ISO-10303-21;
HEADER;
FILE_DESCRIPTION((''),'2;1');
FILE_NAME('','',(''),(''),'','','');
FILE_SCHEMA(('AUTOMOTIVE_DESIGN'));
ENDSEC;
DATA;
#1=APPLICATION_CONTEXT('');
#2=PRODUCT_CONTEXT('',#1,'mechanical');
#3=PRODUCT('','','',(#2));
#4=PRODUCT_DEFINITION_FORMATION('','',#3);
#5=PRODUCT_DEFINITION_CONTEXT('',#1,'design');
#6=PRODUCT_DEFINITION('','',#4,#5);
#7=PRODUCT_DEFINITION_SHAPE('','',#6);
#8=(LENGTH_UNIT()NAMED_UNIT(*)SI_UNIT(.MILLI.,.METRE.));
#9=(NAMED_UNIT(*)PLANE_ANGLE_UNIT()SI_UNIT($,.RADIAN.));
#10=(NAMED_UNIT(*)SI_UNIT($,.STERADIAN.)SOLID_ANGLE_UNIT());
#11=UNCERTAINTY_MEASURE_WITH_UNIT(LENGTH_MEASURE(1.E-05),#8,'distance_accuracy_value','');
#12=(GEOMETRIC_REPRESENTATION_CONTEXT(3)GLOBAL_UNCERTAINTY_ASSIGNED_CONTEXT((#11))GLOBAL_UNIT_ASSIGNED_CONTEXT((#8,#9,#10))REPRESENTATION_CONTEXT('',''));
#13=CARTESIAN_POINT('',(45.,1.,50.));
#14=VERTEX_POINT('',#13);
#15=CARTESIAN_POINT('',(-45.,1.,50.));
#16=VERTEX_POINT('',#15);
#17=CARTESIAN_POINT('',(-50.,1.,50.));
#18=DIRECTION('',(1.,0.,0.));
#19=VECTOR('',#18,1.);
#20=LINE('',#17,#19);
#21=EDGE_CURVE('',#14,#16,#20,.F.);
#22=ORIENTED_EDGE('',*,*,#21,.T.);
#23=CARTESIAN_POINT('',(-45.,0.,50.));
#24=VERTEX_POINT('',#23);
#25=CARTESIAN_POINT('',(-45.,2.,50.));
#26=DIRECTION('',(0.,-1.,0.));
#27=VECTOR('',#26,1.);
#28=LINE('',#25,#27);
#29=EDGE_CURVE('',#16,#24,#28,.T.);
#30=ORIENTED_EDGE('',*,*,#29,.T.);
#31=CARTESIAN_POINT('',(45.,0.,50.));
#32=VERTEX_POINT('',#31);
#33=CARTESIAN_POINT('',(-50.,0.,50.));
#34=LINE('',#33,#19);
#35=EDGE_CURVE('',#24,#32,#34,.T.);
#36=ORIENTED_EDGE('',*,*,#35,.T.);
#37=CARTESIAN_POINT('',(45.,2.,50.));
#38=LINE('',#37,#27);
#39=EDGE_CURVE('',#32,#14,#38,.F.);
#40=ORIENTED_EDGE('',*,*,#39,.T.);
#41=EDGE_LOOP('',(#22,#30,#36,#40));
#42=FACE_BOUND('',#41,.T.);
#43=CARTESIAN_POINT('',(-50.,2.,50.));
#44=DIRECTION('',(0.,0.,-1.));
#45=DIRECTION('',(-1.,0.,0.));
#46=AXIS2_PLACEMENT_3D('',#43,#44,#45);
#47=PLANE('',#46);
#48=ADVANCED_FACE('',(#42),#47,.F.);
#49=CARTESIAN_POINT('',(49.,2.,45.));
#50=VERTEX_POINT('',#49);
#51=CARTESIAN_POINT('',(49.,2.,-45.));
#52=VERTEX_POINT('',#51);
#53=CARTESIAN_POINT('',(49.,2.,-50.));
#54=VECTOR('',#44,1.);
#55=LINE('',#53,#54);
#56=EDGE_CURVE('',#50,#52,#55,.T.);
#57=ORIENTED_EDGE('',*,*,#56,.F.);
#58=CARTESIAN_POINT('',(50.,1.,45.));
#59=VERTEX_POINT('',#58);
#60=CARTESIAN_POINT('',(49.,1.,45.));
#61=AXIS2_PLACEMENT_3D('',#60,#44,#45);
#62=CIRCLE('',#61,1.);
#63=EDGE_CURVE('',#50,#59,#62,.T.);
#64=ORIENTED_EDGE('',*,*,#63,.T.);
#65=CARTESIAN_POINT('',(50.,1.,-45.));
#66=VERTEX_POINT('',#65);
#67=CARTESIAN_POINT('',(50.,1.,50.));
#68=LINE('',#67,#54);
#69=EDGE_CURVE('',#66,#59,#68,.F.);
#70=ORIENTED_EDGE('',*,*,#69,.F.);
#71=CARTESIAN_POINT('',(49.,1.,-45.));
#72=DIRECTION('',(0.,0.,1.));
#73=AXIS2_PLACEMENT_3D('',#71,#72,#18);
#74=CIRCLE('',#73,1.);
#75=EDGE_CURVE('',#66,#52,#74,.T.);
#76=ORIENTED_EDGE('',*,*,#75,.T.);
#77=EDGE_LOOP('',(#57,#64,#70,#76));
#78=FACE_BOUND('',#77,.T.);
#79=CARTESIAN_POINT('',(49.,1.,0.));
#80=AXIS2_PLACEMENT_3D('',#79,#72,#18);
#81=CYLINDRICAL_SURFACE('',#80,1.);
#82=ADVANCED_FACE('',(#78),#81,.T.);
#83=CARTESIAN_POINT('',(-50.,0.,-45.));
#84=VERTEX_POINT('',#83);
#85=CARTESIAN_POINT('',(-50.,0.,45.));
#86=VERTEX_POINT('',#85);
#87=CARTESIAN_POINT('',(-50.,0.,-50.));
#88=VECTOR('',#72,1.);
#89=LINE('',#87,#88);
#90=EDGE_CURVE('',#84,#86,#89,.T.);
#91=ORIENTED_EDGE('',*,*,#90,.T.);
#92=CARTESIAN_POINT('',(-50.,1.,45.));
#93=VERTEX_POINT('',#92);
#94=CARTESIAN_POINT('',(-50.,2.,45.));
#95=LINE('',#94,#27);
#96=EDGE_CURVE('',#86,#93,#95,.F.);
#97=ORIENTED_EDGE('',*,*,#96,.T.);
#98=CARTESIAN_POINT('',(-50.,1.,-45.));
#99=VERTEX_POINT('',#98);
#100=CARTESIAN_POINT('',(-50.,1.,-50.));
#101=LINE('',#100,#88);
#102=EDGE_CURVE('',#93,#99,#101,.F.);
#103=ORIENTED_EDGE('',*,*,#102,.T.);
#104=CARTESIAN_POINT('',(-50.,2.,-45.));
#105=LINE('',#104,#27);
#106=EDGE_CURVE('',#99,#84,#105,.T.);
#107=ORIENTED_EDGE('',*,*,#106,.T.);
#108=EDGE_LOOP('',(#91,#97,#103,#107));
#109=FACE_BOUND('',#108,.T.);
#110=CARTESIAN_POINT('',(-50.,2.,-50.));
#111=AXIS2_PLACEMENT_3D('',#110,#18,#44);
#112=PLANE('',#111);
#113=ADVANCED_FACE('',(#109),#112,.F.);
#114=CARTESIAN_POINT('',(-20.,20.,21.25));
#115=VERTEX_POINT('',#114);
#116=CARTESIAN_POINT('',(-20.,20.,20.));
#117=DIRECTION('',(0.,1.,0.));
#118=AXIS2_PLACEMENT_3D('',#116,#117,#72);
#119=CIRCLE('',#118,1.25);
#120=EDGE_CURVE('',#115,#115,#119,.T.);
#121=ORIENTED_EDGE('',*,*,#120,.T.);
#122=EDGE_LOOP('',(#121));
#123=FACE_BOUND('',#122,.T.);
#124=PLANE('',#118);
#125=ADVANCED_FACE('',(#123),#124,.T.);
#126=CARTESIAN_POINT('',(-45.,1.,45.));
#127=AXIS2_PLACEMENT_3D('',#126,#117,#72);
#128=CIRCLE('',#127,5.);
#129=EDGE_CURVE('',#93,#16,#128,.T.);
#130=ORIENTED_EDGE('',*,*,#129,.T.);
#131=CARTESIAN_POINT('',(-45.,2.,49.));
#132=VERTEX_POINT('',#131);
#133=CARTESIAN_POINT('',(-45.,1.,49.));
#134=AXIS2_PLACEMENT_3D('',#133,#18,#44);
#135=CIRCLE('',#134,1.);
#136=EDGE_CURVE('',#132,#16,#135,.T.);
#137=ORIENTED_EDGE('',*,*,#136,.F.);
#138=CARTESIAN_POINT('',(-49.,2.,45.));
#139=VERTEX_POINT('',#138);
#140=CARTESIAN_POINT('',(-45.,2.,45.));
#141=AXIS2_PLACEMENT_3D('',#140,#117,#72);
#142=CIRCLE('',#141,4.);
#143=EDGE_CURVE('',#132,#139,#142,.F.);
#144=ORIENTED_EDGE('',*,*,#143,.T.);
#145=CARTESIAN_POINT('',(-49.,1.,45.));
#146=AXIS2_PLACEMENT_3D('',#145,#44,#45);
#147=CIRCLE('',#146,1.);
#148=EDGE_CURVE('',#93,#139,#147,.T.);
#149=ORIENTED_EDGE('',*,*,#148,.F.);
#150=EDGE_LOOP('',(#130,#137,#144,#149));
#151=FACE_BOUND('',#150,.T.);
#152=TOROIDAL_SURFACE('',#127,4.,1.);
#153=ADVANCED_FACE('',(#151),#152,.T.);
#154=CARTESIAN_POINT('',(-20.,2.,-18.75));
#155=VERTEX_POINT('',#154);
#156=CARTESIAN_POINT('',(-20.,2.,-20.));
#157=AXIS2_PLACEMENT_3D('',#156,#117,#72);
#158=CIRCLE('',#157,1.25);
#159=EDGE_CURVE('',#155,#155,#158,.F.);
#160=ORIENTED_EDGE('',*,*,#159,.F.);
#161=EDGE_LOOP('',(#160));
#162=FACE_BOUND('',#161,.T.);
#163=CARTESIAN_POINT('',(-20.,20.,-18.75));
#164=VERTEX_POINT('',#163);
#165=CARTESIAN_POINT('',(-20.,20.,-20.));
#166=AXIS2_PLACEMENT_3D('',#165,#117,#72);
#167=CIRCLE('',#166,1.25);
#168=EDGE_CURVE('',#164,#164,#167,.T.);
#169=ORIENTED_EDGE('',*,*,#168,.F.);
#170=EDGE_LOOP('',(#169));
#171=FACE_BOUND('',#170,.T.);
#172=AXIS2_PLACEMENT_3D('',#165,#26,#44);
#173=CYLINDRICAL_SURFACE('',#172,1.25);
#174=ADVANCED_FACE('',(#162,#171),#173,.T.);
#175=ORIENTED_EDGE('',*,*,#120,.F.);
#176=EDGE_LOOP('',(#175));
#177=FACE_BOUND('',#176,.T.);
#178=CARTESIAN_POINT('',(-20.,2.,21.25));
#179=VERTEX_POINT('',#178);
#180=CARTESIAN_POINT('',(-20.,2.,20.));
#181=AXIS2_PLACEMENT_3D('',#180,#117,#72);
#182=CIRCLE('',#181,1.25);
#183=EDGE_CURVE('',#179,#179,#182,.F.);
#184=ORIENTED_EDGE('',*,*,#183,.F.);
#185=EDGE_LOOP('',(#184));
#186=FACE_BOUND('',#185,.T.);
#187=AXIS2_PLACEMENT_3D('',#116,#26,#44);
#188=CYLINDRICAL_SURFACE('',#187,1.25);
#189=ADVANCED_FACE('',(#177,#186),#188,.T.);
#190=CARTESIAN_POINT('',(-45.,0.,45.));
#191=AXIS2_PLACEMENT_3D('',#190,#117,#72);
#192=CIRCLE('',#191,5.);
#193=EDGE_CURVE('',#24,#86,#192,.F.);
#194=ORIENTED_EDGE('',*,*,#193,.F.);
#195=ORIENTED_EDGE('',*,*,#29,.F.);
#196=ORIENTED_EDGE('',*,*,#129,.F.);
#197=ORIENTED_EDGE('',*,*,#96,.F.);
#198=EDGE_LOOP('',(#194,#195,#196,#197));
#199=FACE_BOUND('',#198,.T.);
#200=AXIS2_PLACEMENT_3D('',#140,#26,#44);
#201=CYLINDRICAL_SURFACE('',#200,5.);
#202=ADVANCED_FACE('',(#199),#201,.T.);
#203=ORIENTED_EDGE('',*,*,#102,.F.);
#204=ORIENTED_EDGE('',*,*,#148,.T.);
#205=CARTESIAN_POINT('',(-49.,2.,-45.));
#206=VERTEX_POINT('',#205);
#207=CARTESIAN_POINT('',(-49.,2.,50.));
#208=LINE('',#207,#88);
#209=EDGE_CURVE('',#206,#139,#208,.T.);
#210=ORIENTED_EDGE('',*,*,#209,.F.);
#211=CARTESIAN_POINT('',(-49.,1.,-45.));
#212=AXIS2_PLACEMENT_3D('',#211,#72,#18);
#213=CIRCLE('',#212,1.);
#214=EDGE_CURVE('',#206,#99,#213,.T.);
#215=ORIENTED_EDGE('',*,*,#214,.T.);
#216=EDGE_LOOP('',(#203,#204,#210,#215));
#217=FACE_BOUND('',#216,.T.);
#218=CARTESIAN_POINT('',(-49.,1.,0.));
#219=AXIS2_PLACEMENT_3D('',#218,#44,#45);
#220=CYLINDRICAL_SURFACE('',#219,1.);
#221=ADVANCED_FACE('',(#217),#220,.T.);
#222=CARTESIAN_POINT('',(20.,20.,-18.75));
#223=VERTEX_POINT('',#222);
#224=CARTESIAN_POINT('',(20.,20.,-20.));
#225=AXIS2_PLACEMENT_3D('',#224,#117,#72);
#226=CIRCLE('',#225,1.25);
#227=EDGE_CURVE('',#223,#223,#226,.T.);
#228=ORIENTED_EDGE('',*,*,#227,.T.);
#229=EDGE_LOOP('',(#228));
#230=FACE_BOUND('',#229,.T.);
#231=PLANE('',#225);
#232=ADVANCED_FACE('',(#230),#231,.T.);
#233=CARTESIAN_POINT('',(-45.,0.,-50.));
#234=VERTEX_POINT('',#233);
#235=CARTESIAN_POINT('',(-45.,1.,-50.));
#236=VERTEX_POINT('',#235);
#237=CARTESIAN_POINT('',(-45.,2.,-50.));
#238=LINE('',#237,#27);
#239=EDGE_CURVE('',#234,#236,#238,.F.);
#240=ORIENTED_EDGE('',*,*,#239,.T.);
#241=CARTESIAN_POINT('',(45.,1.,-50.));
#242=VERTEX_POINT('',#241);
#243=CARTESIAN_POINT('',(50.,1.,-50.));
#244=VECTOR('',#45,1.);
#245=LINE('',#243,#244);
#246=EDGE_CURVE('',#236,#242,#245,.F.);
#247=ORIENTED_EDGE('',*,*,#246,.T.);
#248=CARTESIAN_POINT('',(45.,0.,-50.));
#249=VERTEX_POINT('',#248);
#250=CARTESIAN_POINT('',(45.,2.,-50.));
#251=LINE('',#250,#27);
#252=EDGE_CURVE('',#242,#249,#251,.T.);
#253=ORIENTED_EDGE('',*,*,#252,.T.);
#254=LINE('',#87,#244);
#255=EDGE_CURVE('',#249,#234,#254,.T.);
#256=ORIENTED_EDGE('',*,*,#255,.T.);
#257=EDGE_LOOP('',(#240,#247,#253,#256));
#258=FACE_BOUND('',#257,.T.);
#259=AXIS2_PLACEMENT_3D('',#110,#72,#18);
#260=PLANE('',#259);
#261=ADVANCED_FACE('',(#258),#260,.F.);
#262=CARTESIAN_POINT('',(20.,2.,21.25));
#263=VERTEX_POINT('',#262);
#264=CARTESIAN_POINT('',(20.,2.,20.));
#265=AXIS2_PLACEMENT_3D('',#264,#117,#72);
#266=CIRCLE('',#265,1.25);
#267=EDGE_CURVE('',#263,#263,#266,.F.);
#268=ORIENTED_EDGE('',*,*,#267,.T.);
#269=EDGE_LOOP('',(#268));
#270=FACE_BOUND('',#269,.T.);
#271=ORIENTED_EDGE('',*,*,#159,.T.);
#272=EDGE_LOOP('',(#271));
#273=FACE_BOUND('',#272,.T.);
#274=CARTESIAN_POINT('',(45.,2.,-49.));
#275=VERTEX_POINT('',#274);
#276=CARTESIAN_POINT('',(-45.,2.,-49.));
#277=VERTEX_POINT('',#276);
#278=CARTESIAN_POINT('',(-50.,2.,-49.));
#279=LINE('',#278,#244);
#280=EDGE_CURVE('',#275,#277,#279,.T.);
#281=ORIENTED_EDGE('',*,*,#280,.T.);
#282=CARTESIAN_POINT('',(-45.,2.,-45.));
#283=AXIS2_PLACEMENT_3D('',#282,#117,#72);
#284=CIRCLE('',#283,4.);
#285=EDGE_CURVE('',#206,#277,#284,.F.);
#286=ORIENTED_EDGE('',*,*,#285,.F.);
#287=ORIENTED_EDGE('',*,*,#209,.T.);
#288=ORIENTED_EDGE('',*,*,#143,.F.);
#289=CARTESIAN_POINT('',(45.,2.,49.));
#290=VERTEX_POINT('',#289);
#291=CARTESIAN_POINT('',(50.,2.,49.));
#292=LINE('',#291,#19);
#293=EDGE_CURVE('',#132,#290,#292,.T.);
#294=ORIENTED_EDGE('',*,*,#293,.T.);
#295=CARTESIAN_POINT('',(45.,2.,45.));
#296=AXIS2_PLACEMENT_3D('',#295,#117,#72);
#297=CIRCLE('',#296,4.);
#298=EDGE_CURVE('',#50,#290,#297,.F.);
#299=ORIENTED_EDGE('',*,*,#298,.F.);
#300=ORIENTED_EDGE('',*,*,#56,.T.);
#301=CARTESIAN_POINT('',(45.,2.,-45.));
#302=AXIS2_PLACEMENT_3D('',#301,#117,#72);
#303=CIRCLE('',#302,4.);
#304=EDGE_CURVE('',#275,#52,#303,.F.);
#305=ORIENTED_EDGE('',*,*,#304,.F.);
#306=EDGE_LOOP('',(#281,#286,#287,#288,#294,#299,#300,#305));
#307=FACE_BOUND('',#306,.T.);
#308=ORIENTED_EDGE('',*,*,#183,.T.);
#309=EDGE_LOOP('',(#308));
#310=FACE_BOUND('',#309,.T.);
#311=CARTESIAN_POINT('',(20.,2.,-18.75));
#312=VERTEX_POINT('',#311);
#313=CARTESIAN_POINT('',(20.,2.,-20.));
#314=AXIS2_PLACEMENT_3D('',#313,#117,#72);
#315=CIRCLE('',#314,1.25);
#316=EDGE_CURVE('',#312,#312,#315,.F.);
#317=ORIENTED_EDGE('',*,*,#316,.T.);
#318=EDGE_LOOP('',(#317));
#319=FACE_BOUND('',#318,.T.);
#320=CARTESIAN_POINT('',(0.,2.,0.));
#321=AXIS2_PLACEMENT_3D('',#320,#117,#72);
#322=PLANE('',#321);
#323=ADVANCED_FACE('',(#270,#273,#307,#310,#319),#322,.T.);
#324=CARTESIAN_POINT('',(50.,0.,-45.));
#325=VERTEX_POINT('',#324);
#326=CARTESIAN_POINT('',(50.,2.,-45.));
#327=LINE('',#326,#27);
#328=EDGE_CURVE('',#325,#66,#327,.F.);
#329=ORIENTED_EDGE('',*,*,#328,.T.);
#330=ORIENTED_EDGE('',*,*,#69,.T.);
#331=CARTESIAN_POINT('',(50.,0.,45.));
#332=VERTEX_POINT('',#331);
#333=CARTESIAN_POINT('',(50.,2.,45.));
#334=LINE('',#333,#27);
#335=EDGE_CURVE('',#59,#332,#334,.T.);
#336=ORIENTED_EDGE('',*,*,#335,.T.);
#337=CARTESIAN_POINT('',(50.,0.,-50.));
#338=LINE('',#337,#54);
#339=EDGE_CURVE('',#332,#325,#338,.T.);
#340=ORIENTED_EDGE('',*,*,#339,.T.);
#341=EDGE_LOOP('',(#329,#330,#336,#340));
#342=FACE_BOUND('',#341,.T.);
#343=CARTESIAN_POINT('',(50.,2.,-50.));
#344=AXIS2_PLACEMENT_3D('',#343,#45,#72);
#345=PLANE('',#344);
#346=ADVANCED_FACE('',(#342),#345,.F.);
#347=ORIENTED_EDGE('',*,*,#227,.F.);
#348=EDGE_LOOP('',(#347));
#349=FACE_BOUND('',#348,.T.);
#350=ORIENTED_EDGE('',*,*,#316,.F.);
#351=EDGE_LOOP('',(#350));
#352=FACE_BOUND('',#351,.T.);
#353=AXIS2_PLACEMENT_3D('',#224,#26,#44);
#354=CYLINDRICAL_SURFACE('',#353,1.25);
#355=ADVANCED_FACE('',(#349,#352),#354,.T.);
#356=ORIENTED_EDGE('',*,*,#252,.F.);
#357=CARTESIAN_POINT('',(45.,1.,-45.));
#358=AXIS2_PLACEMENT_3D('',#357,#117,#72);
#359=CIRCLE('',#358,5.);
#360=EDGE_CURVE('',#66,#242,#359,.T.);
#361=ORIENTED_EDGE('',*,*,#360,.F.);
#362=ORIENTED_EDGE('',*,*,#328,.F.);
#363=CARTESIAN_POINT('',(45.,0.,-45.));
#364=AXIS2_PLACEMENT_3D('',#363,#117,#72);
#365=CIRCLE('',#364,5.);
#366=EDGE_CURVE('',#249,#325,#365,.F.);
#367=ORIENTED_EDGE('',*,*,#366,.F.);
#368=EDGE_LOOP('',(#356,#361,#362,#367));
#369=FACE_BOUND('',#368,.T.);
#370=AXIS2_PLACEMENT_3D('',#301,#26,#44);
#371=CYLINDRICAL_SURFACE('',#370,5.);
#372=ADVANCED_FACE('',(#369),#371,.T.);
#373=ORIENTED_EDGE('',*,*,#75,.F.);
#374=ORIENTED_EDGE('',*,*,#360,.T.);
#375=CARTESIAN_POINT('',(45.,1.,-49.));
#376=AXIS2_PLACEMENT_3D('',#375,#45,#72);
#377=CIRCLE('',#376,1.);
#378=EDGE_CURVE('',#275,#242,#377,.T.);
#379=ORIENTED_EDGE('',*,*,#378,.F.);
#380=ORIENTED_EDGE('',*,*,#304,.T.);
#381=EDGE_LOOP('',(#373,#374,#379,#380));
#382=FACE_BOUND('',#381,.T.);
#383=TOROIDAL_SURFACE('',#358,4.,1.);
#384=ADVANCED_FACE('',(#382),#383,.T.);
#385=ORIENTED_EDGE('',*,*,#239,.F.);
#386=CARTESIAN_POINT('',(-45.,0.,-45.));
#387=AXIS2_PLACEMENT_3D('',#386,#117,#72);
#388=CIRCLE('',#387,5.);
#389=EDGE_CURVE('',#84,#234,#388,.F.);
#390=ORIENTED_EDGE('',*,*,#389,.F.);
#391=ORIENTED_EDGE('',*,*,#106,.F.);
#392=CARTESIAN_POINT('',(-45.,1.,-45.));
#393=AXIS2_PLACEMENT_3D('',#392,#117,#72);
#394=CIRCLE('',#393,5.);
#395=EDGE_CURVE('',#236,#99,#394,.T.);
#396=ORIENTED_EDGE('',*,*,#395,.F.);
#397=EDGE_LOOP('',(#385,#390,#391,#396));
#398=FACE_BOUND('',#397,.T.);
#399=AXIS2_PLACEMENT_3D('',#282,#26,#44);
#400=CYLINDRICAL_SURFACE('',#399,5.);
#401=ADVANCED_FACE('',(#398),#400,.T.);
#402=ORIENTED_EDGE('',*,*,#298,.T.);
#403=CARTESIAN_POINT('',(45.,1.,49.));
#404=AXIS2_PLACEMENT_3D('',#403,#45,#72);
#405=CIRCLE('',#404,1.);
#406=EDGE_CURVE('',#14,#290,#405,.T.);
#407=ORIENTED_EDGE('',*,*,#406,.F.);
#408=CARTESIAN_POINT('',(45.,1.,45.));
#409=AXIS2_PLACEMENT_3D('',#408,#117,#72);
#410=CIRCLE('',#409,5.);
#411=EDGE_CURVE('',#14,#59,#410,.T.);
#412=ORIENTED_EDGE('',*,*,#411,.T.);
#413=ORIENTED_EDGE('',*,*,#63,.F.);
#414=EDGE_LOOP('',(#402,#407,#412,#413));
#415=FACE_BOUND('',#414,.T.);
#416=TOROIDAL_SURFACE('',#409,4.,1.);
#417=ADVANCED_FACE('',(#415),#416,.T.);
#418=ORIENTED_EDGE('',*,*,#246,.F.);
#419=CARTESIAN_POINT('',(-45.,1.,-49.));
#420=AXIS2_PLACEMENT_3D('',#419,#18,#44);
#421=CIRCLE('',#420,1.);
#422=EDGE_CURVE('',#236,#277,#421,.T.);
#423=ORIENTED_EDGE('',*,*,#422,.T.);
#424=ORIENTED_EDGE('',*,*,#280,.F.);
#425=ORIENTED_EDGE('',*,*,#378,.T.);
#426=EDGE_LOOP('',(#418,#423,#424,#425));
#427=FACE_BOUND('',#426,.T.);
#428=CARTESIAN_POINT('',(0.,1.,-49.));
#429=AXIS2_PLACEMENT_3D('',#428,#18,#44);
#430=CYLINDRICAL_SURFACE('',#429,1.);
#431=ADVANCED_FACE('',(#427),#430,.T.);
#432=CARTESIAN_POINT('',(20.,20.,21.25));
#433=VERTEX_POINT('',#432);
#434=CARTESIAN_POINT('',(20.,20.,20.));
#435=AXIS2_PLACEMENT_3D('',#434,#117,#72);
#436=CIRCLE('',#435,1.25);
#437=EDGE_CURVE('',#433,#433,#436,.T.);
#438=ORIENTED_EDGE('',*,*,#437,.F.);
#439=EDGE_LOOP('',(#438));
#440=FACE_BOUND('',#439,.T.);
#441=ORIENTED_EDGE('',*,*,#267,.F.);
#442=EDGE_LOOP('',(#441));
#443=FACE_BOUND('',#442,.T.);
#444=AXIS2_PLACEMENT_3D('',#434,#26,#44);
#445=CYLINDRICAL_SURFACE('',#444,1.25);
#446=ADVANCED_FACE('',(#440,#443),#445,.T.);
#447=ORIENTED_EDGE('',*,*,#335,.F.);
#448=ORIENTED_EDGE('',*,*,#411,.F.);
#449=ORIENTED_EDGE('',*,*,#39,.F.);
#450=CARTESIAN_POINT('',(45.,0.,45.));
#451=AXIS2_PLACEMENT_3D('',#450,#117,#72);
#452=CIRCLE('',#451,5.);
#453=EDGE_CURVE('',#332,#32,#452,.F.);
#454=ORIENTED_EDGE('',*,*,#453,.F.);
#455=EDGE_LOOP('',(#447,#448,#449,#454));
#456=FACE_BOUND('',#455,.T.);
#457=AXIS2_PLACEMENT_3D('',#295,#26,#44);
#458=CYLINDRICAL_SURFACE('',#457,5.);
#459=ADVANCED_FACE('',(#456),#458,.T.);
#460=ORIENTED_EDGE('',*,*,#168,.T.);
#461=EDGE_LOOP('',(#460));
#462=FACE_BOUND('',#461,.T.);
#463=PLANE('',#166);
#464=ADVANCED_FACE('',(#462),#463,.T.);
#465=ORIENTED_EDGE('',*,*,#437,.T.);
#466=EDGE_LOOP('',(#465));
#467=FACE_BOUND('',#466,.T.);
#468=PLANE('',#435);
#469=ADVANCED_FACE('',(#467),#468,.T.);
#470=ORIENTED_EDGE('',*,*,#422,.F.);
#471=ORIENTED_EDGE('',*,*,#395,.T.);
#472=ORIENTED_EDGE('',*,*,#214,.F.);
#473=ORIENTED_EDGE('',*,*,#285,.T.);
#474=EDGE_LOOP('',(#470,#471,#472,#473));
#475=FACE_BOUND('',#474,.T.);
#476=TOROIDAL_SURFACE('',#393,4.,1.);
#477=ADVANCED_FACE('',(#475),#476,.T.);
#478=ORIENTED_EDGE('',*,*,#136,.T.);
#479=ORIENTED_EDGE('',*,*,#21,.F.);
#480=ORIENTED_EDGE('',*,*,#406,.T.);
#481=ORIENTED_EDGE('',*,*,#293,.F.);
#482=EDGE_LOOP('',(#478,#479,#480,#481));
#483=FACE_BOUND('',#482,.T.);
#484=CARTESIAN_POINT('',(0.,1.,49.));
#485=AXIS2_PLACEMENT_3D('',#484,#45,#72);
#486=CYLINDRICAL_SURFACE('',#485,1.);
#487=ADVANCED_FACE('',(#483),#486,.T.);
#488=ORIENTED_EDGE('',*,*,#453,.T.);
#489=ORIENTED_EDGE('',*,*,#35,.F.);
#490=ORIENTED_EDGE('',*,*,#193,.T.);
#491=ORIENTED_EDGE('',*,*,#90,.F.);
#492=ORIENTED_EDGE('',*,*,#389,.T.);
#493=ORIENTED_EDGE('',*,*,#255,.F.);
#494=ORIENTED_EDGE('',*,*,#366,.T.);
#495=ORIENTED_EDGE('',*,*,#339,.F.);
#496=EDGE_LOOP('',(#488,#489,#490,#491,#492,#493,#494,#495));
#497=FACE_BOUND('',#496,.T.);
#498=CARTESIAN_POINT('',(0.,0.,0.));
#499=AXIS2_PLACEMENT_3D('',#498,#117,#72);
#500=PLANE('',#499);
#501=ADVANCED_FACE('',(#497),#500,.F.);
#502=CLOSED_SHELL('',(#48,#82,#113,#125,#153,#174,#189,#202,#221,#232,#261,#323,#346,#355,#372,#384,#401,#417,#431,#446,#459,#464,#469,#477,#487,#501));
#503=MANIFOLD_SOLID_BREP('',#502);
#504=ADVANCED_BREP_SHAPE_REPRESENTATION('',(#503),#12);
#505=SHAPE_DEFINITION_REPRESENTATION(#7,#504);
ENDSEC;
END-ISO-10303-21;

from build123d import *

# Parameters (mm, degrees)
SKETCH1_W           = 100
SKETCH1_H           = 100
BOSS_EXTRUDE1_DEPTH = 2
SKETCH2_R           = 1.25
BOSS_EXTRUDE2_DEPTH = 20
FILLET1_R           = 1
FILLET2_R           = 5


with BuildPart() as part:
    # Sketch1 → Boss-Extrude1 (new body)
    with BuildSketch(Plane(origin=(0, 0, 0), x_dir=(1, 0, 0), z_dir=(0, 1, 0))):
        Rectangle(SKETCH1_W, SKETCH1_H)
    extrude(amount=BOSS_EXTRUDE1_DEPTH)

    # Sketch2 → Boss-Extrude2 (add)
    with BuildSketch(Plane(origin=(0, 0, 0), x_dir=(1, 0, 0), z_dir=(0, 1, 0))):
        with Locations(Location((-20, -20, 0), (0, 0, 270))):
            Circle(SKETCH2_R)
        with Locations(Location((-20, 20, 0), (0, 0, 270))):
            Circle(SKETCH2_R)
        with Locations(Location((20, 20, 0), (0, 0, 270))):
            Circle(SKETCH2_R)
        with Locations(Location((20, -20, 0), (0, 0, 270))):
            Circle(SKETCH2_R)
    extrude(amount=BOSS_EXTRUDE2_DEPTH)

    # Fillet1
    fillet1_edges = [part.edges().sort_by_distance(p)[0] for p in [
        (-50, 2, 0),
        (0, 2, 50),
        (50, 2, 0),
        (0, 2, -50),
    ]]
    fillet(fillet1_edges, radius=FILLET1_R)

    # Fillet2
    # the kernel refuses this fillet: 5 mm, written as the material it takes off along each edge
    with BuildSketch(Plane(origin=(-45, 2, 45), x_dir=(-1, 0, 0), z_dir=(0, 0, -1))) as fillet2_piece_1:
        with BuildLine():
            CenterArc((4, -1), 1, 0, 90)
            Line((5, -1), (5, 0))
            Line((5, 0), (4, 0))
        make_face()
    revolve(axis=Axis((-45, 2, 45), (0, 1, 0)), revolution_arc=90, mode=Mode.SUBTRACT)
    with BuildSketch(Plane(origin=(-45, 2, -45), x_dir=(0, 0, -1), z_dir=(1, 0, 0))) as fillet2_piece_2:
        with BuildLine():
            CenterArc((4, -1), 1, 0, 90)
            Line((5, -1), (5, 0))
            Line((5, 0), (4, 0))
        make_face()
    revolve(axis=Axis((-45, 2, -45), (0, 1, 0)), revolution_arc=90, mode=Mode.SUBTRACT)
    with BuildSketch(Plane(origin=(45, 2, 45), x_dir=(0, 0, 1), z_dir=(-1, 0, 0))) as fillet2_piece_3:
        with BuildLine():
            CenterArc((4, -1), 1, 0, 90)
            Line((5, -1), (5, 0))
            Line((5, 0), (4, 0))
        make_face()
    revolve(axis=Axis((45, 2, 45), (0, 1, 0)), revolution_arc=90, mode=Mode.SUBTRACT)
    with BuildSketch(Plane(origin=(45, 2, -45), x_dir=(1, 0, 0), z_dir=(0, 0, 1))) as fillet2_piece_4:
        with BuildLine():
            CenterArc((4, -1), 1, 0, 90)
            Line((5, -1), (5, 0))
            Line((5, 0), (4, 0))
        make_face()
    revolve(axis=Axis((45, 2, -45), (0, 1, 0)), revolution_arc=90, mode=Mode.SUBTRACT)
    with BuildSketch(Plane(origin=(50, -12.5, -50), x_dir=(-1, 0, 0), z_dir=(0, 1, 0)), Plane(origin=(50, -12.5, 50), x_dir=(0, 0, -1), z_dir=(0, 1, 0))) as fillet2_piece_5:
        with BuildLine():
            CenterArc((FILLET2_R, FILLET2_R), FILLET2_R, 180, 90)
            Line((0, FILLET2_R), (0, 0))
            Line((0, 0), (FILLET2_R, 0))
        make_face()
    extrude(amount=14.5, mode=Mode.SUBTRACT)
    with BuildSketch(Plane(origin=(-50, -12.5, -50), x_dir=(1, 0, 0), z_dir=(0, 1, 0)), Plane(origin=(-50, -12.5, 50), x_dir=(0, 0, -1), z_dir=(0, 1, 0))) as fillet2_piece_6:
        with BuildLine():
            CenterArc((FILLET2_R, -FILLET2_R), FILLET2_R, 90, 90)
            Line((0, -FILLET2_R), (0, 0))
            Line((0, 0), (FILLET2_R, 0))
        make_face()
    extrude(amount=14.5, mode=Mode.SUBTRACT)


solid = part.part
